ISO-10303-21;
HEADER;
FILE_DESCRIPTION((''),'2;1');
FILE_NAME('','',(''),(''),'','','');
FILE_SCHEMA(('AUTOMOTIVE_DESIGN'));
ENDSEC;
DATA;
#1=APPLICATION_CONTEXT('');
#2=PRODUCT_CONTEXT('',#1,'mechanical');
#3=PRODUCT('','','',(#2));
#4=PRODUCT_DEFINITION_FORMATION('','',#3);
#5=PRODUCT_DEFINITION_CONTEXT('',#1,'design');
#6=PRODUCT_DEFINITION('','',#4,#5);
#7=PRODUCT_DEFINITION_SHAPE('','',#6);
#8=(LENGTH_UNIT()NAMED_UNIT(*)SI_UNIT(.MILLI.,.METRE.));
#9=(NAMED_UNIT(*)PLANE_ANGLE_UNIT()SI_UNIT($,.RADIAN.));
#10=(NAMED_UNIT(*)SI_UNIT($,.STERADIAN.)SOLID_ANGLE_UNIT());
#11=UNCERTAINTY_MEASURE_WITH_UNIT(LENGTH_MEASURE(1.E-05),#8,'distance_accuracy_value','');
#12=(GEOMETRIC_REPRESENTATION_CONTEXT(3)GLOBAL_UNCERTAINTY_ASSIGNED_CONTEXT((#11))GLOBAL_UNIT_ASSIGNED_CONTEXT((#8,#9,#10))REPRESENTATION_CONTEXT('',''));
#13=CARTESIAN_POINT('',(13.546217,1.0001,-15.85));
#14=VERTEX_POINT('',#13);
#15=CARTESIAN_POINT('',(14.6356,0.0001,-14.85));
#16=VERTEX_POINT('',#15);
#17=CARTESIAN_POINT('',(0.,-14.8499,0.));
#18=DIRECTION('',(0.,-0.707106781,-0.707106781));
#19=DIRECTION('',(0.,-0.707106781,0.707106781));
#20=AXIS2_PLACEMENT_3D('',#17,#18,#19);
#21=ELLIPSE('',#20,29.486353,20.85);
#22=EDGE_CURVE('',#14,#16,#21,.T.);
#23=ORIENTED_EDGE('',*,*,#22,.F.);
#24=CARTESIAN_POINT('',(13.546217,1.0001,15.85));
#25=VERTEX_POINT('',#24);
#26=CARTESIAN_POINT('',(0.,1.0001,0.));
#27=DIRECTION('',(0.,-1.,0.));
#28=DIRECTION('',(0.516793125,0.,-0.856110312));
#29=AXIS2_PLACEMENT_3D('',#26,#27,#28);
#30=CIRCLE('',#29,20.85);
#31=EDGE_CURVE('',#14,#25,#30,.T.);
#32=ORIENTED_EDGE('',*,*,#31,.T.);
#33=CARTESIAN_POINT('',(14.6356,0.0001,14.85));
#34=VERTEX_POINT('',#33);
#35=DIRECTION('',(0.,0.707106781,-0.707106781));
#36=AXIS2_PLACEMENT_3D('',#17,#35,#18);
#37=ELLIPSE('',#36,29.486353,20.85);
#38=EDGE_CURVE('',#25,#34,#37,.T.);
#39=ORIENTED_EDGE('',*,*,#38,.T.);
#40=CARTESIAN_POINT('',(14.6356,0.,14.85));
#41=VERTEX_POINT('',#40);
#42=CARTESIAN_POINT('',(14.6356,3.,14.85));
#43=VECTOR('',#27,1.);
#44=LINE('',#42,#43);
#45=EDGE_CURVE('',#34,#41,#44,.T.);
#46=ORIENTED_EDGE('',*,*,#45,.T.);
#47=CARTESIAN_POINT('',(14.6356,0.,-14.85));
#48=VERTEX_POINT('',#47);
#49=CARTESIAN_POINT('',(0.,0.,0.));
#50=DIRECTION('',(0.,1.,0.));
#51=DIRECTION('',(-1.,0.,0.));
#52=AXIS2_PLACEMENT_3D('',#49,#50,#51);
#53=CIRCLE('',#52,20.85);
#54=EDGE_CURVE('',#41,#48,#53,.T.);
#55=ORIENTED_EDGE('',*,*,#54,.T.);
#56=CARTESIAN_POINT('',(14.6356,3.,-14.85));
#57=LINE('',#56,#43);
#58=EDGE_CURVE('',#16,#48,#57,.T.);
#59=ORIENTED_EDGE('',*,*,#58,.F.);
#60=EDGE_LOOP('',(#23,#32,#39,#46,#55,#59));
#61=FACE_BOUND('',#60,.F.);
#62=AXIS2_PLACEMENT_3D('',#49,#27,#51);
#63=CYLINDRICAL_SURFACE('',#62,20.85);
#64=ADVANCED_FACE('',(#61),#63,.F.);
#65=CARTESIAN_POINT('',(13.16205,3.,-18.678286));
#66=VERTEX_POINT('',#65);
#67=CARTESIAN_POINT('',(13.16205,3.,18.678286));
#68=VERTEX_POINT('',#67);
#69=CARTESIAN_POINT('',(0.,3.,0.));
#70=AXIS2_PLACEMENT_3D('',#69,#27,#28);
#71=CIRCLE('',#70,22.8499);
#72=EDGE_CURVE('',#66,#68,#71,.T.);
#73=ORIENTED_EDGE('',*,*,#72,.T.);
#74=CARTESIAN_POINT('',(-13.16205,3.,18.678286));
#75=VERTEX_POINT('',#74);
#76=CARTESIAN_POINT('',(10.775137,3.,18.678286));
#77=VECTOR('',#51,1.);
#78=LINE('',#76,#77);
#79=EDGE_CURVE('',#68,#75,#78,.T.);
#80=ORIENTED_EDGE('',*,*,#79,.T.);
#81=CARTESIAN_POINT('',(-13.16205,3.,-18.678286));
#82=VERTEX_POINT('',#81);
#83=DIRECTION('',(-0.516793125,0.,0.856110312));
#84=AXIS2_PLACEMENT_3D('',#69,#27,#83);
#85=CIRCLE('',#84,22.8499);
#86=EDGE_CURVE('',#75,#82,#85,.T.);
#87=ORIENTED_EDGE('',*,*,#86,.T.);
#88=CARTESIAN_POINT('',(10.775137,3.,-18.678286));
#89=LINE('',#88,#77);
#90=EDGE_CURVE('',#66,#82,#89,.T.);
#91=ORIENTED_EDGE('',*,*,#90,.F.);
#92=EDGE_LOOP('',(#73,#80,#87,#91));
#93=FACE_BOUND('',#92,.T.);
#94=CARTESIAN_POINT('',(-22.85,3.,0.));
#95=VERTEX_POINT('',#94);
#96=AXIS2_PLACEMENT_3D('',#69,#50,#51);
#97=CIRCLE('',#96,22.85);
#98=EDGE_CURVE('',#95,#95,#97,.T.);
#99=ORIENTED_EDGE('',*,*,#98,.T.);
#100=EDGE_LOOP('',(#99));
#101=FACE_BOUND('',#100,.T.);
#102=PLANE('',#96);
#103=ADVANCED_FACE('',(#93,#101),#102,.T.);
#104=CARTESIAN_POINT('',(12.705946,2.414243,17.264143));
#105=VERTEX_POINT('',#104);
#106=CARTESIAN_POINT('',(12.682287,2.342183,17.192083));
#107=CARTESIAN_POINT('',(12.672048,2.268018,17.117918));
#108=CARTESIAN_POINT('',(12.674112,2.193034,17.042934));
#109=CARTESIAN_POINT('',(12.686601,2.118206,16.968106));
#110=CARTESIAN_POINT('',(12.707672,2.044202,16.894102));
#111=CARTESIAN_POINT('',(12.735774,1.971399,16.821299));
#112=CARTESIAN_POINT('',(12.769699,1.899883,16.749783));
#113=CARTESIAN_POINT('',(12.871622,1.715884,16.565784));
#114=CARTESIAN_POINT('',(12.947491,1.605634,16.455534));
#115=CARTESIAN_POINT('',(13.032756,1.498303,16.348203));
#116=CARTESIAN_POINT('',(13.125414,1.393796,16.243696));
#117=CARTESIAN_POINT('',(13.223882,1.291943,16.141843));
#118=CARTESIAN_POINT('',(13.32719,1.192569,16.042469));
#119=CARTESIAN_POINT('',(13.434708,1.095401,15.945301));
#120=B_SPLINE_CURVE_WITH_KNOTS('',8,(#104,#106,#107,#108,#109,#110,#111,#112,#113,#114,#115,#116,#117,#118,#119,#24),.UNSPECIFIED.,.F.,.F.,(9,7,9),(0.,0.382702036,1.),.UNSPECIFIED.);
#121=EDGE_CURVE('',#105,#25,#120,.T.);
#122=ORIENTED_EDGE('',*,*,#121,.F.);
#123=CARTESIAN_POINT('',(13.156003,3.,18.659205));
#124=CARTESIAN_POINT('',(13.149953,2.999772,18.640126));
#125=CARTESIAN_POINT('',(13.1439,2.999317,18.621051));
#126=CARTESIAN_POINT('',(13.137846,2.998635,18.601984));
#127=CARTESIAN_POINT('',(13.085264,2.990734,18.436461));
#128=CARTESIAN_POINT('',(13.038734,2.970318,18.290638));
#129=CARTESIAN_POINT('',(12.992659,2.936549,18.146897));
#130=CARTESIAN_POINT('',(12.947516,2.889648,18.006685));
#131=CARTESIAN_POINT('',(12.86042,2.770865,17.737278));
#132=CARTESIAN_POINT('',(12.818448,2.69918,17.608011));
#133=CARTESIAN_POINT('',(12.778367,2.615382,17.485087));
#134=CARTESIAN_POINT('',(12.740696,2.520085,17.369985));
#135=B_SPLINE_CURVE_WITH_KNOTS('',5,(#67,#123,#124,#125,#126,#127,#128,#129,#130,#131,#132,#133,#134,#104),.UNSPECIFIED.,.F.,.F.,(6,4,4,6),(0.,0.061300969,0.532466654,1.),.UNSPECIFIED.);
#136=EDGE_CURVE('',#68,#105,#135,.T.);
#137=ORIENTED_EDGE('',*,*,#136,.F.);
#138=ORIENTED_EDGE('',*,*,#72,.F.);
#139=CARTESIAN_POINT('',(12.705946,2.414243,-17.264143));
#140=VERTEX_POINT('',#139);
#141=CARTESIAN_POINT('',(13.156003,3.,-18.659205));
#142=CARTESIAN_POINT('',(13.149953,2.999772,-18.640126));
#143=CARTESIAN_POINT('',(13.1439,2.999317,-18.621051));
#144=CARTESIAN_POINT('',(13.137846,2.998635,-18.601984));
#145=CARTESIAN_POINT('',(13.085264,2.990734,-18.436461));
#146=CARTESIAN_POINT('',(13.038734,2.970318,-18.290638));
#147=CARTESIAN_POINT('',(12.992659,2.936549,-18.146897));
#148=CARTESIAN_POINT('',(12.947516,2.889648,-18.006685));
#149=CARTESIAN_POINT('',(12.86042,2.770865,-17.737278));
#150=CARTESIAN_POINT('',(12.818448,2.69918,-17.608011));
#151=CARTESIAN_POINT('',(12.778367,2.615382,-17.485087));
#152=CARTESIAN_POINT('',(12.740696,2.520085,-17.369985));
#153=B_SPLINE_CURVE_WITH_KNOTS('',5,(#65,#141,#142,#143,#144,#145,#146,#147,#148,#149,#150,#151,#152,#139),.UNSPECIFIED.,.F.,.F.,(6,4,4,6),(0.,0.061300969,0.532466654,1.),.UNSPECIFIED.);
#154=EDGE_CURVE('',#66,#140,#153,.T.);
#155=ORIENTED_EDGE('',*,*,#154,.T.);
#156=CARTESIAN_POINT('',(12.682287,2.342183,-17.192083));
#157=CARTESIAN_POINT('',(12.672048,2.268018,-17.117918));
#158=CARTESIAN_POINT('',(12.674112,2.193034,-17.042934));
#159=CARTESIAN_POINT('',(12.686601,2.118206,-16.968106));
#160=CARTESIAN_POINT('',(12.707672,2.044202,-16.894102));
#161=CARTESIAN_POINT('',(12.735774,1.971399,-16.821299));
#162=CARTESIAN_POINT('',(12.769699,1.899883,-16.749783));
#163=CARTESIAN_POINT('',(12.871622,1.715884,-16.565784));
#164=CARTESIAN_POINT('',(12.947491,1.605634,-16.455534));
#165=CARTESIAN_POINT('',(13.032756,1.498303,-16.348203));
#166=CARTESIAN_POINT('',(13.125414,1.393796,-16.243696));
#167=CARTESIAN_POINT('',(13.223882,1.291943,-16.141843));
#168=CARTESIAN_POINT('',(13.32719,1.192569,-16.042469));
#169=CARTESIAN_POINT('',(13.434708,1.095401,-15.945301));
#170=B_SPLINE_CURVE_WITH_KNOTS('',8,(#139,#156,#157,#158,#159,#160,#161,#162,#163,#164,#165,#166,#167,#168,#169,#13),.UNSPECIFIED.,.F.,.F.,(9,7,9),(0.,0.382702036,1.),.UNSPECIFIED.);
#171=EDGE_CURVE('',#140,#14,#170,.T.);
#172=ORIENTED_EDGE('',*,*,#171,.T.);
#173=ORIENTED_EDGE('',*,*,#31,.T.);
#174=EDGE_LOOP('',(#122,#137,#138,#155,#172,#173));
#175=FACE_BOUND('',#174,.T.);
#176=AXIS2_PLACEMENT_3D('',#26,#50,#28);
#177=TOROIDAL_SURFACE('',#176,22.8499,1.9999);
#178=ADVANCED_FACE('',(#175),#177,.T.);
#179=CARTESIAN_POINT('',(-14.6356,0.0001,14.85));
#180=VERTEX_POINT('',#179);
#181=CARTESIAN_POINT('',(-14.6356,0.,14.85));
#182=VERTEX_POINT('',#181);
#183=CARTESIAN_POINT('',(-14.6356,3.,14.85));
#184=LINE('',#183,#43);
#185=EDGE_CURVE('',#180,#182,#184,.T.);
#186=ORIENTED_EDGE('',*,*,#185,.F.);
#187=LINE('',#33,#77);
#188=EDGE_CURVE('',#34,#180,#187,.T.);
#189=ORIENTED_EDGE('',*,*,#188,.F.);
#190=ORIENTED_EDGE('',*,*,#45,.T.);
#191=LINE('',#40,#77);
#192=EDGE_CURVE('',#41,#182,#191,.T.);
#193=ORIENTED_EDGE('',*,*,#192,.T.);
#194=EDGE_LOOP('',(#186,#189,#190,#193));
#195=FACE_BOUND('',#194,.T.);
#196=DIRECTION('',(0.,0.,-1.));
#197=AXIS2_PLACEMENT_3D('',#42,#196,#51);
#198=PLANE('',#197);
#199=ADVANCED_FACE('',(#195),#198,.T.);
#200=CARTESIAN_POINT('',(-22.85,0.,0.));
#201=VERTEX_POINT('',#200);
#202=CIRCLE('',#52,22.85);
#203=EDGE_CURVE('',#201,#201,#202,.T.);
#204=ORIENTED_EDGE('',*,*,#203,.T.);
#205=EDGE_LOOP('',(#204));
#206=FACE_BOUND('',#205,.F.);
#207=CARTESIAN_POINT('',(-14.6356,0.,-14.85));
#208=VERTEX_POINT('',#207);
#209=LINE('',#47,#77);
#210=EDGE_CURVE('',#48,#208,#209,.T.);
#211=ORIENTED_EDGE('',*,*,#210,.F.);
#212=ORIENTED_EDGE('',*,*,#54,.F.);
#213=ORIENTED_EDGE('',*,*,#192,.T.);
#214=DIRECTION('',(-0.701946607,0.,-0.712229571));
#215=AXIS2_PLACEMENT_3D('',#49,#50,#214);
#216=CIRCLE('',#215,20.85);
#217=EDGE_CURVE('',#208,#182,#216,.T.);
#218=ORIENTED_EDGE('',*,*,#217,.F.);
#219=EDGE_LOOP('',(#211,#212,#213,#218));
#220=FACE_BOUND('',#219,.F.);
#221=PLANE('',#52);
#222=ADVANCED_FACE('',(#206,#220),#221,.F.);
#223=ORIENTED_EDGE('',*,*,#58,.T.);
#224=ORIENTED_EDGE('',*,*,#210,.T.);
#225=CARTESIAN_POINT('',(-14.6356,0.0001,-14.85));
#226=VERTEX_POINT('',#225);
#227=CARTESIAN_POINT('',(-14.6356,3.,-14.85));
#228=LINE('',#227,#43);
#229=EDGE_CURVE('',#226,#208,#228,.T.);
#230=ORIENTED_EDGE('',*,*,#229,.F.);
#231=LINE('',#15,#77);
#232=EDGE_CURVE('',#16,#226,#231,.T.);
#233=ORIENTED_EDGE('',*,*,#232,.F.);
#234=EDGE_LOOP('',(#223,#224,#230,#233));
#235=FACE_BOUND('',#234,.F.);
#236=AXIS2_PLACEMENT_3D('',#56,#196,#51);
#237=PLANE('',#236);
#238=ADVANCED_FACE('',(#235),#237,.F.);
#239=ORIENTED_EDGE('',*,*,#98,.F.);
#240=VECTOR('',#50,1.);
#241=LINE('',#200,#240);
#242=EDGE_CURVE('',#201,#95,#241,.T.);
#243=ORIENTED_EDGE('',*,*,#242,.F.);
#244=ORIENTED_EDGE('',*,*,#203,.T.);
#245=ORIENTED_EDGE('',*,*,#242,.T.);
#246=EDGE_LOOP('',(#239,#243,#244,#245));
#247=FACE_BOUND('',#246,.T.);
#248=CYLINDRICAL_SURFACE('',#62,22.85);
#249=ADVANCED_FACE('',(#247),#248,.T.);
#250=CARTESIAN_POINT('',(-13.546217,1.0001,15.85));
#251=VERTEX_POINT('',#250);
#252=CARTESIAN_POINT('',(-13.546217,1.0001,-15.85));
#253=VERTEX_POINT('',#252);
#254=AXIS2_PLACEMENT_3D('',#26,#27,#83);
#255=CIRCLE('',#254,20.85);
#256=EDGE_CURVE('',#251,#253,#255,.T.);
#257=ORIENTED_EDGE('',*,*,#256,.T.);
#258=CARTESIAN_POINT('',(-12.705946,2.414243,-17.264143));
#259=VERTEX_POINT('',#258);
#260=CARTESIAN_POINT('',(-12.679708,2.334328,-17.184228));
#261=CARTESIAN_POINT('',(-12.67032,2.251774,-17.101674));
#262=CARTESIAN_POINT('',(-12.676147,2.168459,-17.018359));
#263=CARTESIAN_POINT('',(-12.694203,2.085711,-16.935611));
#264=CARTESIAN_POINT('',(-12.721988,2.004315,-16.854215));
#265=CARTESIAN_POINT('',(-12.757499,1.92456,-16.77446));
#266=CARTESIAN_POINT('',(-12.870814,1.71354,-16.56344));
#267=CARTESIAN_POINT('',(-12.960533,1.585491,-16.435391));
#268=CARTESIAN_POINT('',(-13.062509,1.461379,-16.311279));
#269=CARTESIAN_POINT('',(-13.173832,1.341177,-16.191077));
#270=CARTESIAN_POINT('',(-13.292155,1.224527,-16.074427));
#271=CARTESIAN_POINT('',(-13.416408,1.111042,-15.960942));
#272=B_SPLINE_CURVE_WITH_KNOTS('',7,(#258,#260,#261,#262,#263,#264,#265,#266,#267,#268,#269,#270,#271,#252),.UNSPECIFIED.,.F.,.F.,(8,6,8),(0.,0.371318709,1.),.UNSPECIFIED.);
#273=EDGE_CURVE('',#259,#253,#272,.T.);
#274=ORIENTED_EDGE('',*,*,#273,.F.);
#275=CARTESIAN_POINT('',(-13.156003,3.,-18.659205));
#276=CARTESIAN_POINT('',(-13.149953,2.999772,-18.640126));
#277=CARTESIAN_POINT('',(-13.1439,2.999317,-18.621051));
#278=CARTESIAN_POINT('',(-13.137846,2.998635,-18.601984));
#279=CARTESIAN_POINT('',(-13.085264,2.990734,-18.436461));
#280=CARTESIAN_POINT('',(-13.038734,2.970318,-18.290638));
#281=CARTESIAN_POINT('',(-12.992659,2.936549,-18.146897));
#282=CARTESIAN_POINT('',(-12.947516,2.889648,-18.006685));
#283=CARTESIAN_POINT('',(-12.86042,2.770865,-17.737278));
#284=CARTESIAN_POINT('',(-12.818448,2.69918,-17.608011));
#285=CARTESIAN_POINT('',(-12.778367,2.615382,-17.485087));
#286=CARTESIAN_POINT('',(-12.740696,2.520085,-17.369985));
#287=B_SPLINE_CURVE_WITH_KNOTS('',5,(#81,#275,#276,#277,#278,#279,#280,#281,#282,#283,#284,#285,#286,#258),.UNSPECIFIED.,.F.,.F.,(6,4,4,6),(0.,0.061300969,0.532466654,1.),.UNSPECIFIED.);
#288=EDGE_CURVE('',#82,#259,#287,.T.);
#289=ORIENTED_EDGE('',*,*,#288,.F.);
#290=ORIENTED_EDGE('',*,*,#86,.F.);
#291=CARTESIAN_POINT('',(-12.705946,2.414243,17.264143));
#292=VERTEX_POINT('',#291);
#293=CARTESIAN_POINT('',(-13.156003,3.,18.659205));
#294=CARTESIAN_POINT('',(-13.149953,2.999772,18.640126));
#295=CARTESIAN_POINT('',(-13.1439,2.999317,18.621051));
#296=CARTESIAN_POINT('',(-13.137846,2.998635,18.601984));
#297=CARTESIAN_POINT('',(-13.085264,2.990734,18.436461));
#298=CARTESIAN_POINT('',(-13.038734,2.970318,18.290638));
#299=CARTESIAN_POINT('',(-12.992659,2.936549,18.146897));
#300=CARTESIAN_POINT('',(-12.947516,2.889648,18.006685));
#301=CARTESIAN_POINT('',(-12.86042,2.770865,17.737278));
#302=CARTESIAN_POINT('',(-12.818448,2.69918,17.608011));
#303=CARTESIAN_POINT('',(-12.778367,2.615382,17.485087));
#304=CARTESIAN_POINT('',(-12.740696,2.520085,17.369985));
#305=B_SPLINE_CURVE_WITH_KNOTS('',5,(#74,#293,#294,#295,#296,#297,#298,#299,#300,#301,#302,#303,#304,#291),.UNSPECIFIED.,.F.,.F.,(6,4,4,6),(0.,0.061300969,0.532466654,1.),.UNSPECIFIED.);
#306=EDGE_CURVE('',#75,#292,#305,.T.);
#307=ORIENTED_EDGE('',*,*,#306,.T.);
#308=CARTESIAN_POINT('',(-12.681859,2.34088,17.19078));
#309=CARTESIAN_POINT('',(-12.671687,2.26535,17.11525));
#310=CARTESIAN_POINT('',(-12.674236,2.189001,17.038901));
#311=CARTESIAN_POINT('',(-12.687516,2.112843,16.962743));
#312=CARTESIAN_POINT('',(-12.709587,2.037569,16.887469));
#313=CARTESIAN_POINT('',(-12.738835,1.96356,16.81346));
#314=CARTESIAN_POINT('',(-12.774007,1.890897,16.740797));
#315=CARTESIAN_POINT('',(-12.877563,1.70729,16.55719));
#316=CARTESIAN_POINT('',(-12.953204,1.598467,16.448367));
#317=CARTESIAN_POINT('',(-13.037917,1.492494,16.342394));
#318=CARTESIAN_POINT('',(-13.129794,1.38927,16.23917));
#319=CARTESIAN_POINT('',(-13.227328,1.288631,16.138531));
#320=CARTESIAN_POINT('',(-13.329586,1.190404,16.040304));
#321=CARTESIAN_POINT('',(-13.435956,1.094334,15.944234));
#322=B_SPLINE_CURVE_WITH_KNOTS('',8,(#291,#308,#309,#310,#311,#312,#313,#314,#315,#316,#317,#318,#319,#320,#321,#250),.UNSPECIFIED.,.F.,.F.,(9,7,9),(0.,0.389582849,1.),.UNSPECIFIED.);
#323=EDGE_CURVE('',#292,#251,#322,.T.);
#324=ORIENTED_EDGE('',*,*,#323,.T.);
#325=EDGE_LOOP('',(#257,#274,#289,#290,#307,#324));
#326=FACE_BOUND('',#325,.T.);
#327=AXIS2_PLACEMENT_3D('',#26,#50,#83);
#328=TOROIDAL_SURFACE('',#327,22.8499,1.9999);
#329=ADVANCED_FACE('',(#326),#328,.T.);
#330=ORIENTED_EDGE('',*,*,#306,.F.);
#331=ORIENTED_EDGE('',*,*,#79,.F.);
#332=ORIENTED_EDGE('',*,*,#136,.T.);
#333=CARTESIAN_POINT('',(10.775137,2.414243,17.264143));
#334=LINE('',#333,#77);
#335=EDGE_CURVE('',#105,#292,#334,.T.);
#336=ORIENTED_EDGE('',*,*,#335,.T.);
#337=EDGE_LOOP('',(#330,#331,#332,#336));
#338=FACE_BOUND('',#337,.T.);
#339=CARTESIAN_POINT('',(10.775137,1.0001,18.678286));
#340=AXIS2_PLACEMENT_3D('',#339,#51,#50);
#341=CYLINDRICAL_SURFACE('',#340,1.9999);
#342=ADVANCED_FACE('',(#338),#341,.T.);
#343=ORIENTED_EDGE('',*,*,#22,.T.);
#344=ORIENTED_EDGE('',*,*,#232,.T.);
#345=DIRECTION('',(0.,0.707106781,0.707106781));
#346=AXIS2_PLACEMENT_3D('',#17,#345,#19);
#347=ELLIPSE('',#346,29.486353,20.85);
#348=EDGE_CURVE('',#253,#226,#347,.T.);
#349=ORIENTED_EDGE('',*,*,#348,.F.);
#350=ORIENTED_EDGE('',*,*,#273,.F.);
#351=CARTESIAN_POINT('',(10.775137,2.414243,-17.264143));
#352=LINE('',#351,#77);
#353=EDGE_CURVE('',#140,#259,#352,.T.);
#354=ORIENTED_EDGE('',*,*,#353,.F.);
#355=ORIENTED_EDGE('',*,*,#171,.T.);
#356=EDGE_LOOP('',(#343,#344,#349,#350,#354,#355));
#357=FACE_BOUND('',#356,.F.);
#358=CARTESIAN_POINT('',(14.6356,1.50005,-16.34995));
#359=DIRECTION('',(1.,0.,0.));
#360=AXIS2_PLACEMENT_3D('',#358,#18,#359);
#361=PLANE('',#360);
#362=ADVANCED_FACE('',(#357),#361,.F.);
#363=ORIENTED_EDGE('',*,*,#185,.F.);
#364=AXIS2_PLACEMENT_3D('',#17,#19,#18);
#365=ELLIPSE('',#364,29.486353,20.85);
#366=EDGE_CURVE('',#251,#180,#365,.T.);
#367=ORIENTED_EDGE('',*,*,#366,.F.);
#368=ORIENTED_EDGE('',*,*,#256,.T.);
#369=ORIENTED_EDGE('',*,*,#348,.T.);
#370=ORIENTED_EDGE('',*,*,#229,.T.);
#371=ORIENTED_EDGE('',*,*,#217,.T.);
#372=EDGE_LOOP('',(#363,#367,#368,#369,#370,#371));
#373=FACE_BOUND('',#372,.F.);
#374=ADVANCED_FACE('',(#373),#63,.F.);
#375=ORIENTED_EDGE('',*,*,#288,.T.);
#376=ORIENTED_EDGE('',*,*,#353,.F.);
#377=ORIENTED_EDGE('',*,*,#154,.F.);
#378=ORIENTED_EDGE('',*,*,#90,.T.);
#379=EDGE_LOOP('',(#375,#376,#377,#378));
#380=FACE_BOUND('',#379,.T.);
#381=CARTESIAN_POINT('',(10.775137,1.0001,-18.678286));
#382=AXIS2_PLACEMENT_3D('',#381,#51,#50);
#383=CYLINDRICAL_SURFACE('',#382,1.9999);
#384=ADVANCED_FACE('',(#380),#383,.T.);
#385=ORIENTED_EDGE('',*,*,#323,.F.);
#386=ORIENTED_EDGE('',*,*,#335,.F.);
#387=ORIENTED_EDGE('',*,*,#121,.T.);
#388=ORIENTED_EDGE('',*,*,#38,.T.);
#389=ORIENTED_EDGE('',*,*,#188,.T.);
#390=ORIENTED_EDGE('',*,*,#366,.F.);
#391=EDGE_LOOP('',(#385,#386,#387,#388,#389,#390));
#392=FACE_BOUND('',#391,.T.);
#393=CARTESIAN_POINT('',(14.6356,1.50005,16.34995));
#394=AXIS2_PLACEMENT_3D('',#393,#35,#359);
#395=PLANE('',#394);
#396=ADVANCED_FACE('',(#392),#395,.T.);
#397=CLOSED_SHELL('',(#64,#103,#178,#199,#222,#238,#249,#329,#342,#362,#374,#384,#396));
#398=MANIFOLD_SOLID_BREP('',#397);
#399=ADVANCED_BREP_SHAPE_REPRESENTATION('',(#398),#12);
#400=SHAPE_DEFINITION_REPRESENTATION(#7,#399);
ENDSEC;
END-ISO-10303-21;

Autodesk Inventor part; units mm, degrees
ref_plane "YZ Plane" through (0, 0, 0) normal (1, 0, 0) x (0, 1, 0)
ref_plane "XZ Plane" through (0, 0, 0) normal (0, 1, 0) x (-1, 0, 0)
ref_plane "XY Plane" through (0, 0, 0) normal (0, 0, 1) x (1, 0, 0)
sketch "Sketch1" plane through (0, 0, 0) normal (0, 1, 0) x (-1, 0, 0)
  circle A0 centre (0, 0) radius 22.85
  circle A1 centre (0, 0) radius 20.85
  dimension "d0" = 45.7
  dimension "d1" = 2
extrude "Extrusion1" add sketch "Sketch1" along normal blind 3
sketch "Sketch2" plane through (0, 3, 0) normal (0, 1, 0) x (1, 0, 0)
  circle A0 centre (0, 0) radius 22.85 construction
  circle A1 centre (0, 0) radius 20.85 construction
  circle A2 centre (0, 0) radius 22.85 construction
  line L0 (14.6356, -14.85) -> (-14.6356, -14.85)
  line L1 (14.6356, 14.85) -> (-14.6356, 14.85)
  arc A3 (-14.6356, -14.85) -> (14.6356, -14.85) centre (0, 0) ccw
  arc A4 (14.6356, 14.85) -> (-14.6356, 14.85) centre (0, 0) ccw
  dimension "d4" = 8
  dimension "d5" = 8
extrude "Extrusion2" add sketch "Sketch2" against normal blind 3
chamfer "Chamfer1" distance 3 angle 45 2 edges at (0, 3, 14.85) (0, 3, -14.85)
fillet "Fillet1" radius 2 6 edges at (0, 3, 17.8499) (12.7936, 3, 16.4635) (12.7936, 3, -16.4635) (-12.7936, 3, 16.4635) (-12.7936, 3, -16.4635) (0, 3, -17.8499)
properties part number "limit_cone"
